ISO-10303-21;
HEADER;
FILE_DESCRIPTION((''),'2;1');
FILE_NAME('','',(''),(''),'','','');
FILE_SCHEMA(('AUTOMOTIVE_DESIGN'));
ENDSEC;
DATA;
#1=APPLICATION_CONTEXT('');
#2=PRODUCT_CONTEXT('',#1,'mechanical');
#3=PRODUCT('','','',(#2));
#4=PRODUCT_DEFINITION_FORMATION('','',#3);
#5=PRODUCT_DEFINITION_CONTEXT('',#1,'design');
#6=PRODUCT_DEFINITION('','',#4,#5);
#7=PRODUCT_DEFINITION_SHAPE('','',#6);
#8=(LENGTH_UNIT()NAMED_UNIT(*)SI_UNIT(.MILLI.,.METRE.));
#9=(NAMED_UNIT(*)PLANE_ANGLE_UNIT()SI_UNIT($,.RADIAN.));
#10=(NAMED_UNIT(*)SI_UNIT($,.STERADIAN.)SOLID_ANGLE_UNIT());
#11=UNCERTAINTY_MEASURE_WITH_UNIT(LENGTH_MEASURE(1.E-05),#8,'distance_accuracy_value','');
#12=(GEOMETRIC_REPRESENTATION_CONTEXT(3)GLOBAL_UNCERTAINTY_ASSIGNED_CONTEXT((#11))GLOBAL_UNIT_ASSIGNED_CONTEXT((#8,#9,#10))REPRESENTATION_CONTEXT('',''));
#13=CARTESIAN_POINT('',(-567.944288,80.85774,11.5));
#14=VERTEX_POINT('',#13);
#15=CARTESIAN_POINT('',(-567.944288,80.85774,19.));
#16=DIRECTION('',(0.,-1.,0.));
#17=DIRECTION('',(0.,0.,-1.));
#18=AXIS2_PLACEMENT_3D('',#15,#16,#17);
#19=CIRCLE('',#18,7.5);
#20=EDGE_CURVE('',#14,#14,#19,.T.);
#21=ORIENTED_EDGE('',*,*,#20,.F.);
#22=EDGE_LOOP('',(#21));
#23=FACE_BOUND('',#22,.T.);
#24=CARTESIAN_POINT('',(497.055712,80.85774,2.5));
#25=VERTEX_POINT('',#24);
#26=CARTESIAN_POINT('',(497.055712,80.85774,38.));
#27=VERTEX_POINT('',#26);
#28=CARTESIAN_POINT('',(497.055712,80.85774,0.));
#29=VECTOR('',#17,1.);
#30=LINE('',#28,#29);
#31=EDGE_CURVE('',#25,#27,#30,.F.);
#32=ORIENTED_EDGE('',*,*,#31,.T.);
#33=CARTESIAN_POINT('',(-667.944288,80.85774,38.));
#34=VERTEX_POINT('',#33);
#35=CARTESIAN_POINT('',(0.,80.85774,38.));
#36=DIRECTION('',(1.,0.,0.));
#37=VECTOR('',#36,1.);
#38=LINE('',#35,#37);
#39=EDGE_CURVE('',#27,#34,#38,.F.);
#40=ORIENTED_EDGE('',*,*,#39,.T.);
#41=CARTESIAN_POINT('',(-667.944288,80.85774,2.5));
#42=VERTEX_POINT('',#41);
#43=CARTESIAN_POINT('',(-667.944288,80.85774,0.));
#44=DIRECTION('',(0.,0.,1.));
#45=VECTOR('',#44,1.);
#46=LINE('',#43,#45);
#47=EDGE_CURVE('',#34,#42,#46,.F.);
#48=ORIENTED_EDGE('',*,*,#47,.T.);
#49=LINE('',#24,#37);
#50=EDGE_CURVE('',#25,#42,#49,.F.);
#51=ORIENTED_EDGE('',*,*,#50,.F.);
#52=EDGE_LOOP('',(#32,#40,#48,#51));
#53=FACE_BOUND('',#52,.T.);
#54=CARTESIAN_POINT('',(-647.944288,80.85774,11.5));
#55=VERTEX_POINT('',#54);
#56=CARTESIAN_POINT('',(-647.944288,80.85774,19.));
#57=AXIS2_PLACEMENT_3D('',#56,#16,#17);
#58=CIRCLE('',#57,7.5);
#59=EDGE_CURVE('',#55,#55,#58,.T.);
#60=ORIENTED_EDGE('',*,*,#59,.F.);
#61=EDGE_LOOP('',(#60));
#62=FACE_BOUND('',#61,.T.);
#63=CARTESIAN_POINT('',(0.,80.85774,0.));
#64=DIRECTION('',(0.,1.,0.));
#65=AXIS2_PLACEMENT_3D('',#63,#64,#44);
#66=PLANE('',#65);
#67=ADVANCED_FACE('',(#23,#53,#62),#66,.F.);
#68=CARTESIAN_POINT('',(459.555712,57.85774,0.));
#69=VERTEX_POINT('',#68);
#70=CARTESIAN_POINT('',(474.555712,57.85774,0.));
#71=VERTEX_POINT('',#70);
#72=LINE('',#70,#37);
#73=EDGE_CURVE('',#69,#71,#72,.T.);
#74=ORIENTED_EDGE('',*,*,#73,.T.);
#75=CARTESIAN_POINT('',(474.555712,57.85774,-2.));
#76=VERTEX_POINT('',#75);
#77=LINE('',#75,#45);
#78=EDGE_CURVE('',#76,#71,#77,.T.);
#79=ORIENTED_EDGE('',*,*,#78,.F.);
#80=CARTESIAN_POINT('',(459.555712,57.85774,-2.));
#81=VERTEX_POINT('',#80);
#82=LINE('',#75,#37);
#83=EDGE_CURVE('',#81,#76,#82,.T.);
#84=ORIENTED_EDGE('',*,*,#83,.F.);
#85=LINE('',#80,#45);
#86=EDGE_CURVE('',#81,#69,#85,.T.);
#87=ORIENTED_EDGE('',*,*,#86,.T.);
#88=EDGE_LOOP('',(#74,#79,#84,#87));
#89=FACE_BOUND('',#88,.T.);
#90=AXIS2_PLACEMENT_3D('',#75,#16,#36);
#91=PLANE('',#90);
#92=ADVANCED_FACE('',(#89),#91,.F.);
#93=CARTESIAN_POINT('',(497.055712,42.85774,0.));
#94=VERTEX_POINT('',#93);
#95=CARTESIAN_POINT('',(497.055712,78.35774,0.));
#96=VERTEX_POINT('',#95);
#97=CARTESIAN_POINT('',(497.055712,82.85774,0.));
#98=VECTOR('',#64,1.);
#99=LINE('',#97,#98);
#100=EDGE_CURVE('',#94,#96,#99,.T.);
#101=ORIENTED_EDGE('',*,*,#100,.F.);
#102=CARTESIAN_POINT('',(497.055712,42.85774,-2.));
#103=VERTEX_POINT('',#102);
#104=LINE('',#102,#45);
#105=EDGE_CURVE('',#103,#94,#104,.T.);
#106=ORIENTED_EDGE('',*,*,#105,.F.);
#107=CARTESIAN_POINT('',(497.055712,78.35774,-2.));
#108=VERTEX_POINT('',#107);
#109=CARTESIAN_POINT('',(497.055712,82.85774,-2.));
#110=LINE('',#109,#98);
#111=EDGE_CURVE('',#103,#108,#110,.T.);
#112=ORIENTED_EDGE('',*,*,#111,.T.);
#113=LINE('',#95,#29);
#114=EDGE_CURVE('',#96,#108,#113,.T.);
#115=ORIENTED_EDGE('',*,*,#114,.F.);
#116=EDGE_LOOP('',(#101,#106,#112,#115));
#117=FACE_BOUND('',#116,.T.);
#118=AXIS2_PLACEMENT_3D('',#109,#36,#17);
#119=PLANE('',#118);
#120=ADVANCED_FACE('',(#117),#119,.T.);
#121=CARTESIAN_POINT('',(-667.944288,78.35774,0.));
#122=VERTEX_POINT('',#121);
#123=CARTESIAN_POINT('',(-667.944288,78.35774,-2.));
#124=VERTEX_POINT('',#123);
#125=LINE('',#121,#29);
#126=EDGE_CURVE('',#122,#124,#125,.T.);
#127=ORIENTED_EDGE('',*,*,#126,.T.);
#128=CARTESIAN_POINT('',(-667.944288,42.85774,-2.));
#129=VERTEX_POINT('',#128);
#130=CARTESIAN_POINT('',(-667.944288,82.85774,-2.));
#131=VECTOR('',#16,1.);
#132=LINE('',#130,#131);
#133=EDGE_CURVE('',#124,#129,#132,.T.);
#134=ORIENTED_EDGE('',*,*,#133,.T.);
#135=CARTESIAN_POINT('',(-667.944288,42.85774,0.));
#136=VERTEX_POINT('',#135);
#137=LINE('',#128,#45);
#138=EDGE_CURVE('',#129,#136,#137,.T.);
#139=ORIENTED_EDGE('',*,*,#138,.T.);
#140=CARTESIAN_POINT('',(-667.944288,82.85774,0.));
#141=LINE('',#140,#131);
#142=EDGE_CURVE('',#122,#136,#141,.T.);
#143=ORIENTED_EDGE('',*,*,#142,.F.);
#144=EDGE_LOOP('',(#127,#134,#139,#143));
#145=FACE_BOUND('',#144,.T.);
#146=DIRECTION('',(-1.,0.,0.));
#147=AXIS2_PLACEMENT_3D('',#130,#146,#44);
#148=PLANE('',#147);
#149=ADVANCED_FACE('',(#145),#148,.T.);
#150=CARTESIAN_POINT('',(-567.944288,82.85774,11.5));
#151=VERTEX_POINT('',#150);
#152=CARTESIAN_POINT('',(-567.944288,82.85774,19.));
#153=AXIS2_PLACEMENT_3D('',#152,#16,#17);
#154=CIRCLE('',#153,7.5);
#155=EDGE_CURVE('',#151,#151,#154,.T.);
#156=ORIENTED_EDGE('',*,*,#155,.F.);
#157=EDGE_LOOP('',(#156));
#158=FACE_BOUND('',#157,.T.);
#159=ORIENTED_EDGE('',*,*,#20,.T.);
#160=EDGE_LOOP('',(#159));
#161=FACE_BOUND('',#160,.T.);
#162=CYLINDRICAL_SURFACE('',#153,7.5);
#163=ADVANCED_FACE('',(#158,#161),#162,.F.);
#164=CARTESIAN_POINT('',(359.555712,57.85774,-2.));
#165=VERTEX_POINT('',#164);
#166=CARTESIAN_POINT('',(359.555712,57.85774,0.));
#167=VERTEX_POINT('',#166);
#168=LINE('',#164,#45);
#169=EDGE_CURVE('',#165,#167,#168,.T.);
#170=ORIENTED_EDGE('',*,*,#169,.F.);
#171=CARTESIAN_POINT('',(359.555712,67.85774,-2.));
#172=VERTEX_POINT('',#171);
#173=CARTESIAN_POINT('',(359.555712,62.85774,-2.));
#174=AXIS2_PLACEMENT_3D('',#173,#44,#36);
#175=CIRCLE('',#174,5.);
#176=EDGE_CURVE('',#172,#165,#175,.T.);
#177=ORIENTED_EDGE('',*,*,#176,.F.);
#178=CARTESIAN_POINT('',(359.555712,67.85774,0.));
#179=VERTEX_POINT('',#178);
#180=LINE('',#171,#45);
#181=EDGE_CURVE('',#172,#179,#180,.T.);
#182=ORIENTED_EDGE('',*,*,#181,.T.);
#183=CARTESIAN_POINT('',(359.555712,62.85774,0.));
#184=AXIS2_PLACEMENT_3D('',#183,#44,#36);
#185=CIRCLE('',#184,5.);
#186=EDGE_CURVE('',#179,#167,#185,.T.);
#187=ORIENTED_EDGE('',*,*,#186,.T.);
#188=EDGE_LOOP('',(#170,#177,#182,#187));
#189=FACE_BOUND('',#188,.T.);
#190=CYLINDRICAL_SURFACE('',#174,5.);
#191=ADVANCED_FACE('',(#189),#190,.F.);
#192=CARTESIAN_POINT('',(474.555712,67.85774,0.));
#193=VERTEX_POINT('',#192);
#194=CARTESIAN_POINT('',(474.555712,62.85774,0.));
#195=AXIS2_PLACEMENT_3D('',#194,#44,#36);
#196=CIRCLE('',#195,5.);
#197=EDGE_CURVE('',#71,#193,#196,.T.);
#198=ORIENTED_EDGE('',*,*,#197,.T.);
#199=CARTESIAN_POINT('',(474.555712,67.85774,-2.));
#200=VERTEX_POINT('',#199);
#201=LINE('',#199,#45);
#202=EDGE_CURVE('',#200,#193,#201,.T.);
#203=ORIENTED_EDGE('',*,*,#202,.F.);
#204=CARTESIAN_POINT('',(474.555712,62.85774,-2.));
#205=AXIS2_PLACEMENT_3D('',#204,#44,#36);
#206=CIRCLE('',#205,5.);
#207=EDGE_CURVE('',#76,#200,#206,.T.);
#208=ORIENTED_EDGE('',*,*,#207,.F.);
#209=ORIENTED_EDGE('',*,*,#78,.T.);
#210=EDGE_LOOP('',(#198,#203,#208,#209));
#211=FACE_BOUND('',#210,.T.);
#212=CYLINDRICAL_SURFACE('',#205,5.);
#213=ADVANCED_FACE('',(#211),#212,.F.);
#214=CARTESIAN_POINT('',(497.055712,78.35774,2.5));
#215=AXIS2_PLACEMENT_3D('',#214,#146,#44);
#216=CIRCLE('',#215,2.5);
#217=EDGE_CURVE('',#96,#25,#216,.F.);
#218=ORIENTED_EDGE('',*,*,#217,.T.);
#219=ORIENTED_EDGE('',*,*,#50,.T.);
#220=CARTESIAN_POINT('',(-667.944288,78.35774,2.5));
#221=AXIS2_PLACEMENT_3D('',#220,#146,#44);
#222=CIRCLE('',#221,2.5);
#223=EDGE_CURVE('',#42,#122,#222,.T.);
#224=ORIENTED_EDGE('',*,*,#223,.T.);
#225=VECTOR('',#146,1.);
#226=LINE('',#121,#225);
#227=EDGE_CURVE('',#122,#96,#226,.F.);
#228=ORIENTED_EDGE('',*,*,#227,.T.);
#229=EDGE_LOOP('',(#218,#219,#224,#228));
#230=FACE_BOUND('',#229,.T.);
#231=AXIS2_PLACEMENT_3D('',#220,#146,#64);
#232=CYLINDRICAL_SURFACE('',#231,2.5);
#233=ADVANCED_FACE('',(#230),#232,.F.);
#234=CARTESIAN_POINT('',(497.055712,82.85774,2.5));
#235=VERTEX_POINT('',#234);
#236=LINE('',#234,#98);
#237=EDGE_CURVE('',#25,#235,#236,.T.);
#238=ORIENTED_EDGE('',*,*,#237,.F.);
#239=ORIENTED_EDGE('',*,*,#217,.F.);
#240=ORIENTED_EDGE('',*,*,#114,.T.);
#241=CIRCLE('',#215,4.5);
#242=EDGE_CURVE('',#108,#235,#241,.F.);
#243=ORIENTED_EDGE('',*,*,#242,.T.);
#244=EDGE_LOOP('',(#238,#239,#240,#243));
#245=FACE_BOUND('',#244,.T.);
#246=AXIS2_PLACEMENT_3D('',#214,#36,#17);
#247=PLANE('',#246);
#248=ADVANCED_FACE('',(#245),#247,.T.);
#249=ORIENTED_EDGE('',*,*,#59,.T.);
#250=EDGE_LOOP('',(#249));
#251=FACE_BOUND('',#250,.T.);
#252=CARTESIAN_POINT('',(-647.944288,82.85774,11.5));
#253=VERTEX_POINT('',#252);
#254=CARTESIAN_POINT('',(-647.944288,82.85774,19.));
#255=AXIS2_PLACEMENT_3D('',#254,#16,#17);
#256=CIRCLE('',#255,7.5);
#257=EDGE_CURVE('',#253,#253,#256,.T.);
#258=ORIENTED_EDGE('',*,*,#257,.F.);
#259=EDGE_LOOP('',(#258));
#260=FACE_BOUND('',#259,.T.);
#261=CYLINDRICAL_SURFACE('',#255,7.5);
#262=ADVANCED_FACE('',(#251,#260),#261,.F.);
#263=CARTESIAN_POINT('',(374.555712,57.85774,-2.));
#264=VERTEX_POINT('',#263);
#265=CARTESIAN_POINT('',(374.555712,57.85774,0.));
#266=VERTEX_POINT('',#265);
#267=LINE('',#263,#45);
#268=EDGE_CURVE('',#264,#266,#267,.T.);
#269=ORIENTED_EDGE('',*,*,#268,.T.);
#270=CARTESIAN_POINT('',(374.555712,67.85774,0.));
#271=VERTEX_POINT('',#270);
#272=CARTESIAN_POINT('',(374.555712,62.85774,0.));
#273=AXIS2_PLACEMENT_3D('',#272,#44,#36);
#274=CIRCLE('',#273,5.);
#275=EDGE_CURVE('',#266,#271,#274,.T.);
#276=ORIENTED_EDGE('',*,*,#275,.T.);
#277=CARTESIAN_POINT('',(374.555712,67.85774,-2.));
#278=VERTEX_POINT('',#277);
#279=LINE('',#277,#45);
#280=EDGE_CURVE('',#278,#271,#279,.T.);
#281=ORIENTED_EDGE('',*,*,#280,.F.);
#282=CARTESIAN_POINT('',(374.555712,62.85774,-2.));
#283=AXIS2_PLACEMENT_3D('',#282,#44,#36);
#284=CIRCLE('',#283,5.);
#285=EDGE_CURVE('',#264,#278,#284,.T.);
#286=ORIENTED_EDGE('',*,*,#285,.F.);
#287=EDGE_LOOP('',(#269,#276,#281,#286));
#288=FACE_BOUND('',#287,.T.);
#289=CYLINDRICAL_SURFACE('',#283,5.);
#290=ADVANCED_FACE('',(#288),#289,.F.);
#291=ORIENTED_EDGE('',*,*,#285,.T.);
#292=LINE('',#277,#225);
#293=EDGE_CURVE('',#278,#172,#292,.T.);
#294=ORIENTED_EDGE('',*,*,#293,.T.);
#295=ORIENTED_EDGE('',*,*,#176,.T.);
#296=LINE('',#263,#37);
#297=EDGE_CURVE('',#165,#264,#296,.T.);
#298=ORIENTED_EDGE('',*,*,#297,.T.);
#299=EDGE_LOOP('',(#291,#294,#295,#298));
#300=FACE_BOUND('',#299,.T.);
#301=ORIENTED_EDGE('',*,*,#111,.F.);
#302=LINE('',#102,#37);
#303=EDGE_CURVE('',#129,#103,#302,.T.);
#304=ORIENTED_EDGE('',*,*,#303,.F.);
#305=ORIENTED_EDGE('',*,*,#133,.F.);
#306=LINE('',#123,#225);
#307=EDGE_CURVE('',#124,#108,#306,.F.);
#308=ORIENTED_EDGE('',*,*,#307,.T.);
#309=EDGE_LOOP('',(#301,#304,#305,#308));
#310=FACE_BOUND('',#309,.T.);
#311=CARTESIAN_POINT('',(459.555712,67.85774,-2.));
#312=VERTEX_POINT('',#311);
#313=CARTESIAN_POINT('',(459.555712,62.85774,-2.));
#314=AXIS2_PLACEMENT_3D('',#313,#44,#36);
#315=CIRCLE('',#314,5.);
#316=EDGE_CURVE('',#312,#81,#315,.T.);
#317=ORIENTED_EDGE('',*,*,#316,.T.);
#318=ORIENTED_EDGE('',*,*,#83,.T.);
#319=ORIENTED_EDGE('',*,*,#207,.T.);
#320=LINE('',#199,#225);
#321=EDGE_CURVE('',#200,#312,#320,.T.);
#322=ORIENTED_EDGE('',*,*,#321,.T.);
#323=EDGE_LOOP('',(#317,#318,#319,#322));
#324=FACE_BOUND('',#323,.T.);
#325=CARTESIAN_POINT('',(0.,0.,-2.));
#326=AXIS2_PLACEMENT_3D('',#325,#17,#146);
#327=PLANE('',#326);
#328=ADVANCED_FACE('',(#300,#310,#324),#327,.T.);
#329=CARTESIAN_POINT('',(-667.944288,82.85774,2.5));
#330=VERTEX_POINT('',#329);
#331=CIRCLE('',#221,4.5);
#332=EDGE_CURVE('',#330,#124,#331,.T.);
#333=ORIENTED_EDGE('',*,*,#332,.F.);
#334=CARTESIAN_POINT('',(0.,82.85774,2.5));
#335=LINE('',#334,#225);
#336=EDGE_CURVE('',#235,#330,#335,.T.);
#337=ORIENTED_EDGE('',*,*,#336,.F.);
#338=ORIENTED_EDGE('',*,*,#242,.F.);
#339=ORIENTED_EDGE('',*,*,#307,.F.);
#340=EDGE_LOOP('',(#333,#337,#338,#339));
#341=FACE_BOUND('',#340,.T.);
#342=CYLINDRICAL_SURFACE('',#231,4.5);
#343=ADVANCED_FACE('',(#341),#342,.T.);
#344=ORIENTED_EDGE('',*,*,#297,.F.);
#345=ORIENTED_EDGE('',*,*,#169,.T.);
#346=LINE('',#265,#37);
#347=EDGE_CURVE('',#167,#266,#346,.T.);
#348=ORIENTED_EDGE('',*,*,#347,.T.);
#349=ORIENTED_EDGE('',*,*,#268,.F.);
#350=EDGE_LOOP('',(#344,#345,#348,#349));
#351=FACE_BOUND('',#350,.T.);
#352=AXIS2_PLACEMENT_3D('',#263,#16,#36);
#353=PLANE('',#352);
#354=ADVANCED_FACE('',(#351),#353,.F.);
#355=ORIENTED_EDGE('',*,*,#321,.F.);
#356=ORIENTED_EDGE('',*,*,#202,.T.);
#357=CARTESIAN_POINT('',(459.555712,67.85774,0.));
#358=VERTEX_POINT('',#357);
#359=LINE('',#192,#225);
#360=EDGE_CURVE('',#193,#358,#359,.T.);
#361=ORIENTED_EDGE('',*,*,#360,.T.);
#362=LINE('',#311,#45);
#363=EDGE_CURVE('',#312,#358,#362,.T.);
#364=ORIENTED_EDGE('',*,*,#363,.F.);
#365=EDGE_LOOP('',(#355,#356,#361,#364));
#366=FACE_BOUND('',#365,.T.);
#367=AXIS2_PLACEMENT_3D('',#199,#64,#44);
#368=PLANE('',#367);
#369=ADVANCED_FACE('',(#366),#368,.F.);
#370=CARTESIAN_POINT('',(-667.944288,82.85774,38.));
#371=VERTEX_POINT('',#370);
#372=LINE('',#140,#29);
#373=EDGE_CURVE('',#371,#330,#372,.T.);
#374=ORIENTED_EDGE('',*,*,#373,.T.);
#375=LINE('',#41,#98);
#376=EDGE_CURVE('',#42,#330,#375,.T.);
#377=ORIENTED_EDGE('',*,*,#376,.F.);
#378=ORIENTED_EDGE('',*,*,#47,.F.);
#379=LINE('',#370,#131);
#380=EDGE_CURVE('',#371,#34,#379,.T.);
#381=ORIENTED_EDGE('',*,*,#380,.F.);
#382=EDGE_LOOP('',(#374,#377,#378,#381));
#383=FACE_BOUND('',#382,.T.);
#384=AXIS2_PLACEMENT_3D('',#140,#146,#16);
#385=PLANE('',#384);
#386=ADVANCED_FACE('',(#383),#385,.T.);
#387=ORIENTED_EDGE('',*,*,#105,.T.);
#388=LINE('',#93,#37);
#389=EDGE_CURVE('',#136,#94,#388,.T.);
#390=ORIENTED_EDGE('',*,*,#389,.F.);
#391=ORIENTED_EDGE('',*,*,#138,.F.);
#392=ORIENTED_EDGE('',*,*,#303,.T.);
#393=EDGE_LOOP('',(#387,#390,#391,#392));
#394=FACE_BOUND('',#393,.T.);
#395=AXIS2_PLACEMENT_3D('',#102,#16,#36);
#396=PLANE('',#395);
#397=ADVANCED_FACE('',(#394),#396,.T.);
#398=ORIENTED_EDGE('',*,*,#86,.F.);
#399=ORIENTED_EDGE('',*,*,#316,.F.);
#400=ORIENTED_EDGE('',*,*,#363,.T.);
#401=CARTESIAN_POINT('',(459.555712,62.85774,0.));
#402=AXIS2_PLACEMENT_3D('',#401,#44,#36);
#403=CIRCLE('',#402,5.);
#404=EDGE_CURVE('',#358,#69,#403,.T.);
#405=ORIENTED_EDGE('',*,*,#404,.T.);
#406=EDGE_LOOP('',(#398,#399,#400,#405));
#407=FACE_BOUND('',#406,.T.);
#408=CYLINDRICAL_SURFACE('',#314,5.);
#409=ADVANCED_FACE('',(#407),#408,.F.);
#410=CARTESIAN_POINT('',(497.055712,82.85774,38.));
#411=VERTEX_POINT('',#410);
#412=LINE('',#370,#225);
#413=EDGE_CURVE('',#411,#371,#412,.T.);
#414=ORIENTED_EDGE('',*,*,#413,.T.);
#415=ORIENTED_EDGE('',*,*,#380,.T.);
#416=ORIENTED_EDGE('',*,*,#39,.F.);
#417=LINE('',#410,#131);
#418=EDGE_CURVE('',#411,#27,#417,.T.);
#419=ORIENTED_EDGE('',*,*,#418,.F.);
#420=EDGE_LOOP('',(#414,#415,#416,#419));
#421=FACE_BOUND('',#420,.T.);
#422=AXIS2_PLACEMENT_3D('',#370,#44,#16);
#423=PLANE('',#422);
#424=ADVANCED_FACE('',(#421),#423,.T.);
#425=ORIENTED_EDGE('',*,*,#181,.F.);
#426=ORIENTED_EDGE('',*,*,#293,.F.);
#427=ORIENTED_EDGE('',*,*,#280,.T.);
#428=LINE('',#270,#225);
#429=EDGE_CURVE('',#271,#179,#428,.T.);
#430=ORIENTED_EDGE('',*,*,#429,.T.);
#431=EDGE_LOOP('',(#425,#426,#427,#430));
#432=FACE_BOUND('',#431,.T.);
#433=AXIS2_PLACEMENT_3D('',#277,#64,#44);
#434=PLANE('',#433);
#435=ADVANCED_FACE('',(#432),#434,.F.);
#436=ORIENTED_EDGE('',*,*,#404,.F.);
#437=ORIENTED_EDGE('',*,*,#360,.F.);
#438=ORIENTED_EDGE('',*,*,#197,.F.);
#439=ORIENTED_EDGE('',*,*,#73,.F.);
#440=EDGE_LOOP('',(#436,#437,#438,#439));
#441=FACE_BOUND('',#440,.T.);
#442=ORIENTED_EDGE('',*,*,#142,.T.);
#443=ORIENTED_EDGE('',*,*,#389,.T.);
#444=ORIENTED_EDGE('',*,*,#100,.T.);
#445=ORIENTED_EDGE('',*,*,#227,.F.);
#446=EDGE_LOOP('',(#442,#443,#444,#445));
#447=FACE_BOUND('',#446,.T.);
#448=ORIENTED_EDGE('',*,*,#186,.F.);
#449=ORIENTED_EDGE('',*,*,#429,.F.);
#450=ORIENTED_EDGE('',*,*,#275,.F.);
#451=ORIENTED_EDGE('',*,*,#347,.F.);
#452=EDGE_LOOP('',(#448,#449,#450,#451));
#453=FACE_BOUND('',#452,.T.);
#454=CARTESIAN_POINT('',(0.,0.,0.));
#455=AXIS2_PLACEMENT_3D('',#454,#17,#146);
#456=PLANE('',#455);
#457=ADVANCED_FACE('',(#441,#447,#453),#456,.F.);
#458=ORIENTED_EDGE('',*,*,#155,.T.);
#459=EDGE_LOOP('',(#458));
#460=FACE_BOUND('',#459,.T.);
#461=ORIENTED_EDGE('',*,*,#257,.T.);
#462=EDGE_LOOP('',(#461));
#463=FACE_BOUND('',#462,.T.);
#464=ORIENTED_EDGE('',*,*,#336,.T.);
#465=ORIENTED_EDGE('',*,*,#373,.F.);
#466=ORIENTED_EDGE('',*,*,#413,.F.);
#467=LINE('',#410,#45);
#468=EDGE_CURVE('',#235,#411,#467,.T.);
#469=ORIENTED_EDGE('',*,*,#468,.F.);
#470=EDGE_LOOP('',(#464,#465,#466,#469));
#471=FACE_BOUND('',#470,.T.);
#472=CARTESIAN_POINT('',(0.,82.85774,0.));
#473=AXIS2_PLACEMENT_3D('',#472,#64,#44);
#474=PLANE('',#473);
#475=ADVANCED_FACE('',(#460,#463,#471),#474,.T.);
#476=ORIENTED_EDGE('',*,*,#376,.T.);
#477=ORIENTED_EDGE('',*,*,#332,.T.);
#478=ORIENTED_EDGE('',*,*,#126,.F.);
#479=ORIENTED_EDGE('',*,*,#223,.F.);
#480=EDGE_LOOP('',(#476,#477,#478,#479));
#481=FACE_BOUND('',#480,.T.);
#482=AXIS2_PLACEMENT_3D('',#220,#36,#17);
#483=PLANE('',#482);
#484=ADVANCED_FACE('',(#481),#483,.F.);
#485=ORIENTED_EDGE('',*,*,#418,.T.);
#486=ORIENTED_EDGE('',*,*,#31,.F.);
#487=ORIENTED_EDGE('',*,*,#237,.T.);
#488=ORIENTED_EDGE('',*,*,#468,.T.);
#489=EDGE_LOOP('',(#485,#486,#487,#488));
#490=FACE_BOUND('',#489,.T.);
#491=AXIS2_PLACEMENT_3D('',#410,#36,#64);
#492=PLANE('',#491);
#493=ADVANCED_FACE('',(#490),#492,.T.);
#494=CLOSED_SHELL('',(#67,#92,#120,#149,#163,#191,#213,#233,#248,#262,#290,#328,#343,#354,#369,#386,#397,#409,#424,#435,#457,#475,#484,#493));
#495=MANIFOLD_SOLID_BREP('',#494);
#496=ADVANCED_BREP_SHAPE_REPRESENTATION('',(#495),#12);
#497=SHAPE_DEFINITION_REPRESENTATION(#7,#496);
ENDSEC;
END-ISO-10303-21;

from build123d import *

# Parameters (mm, degrees)
SKETCH1_W                    = 1165
SKETCH1_H                    = 40
BASE_FLANGE1_DEPTH           = 2
EDGE_FLANGE1_STRIP_W         = 13
EDGE_FLANGE1_STRIP_H         = 2
EDGE_FLANGE1_STRIP_CUT_DEPTH = 1165
EDGE_FLANGE1_DEPTH           = 1165
SKETCH9_R                    = 7.5
CUT_EXTRUDE1_DEPTH           = 671.102657441


# Sheet-metal steps are written as plain solids
with BuildPart() as part:
    # Sketch1 → Base-Flange1 (new body)
    with BuildSketch(Plane.XY):
        with Locations((-85.444287729, 62.85774027)):
            Rectangle(SKETCH1_W, SKETCH1_H)
        with BuildLine():
            Line((474.555712271, 57.85774027), (459.555712271, 57.85774027))
            ThreePointArc((459.555712271, 57.85774027), (454.555712271, 62.85774027), (459.555712271, 67.85774027))
            Line((459.555712271, 67.85774027), (474.555712271, 67.85774027))
            ThreePointArc((474.555712271, 67.85774027), (479.555712271, 62.85774027), (474.555712271, 57.85774027))
        make_face(mode=Mode.SUBTRACT)
        with BuildLine():
            Line((374.555712271, 57.85774027), (359.555712271, 57.85774027))
            ThreePointArc((359.555712271, 57.85774027), (354.555712271, 62.85774027), (359.555712271, 67.85774027))
            Line((359.555712271, 67.85774027), (374.555712271, 67.85774027))
            ThreePointArc((374.555712271, 67.85774027), (379.555712271, 62.85774027), (374.555712271, 57.85774027))
        make_face(mode=Mode.SUBTRACT)
    extrude(amount=-BASE_FLANGE1_DEPTH)

    # Edge-Flange1 strip (across the edge) → Edge-Flange1 strip cut (cut)
    with BuildSketch(Plane(origin=(497.055712271, 82.85774027, 0), x_dir=(0, -1, 0), z_dir=(-1, 0, 0))):
        with Locations((-2, -1)):
            Rectangle(EDGE_FLANGE1_STRIP_W, EDGE_FLANGE1_STRIP_H)
    extrude(amount=EDGE_FLANGE1_STRIP_CUT_DEPTH, mode=Mode.SUBTRACT)

    # Edge-Flange1 section (across the edge) → Edge-Flange1 (add)
    with BuildSketch(Plane(origin=(497.055712271, 82.85774027, 0), x_dir=(0, -1, 0), z_dir=(-1, 0, 0))):
        with BuildLine():
            Line((0, 2.5), (0, 38))
            Line((0, 38), (2, 38))
            Line((2, 38), (2, 2.5))
            ThreePointArc((2, 2.5), (2.732233047, 0.732233047), (4.5, 0))
            Line((4.5, 0), (4.5, -2))
            ThreePointArc((4.5, -2), (1.318019485, -0.681980515), (0, 2.5))
        make_face()
    extrude(amount=EDGE_FLANGE1_DEPTH)

    # Sketch9 → Cut-Extrude1 (cut, through all)
    with BuildSketch(Plane.XZ.offset(-80.85774027)):
        with Locations(Location((-647.944287729, 19, 0), (0, 0, 270))):
            Circle(SKETCH9_R)
        with Locations(Location((-567.944287729, 19, 0), (0, 0, 270))):
            Circle(SKETCH9_R)
    extrude(amount=-CUT_EXTRUDE1_DEPTH, mode=Mode.SUBTRACT)


solid = part.part
